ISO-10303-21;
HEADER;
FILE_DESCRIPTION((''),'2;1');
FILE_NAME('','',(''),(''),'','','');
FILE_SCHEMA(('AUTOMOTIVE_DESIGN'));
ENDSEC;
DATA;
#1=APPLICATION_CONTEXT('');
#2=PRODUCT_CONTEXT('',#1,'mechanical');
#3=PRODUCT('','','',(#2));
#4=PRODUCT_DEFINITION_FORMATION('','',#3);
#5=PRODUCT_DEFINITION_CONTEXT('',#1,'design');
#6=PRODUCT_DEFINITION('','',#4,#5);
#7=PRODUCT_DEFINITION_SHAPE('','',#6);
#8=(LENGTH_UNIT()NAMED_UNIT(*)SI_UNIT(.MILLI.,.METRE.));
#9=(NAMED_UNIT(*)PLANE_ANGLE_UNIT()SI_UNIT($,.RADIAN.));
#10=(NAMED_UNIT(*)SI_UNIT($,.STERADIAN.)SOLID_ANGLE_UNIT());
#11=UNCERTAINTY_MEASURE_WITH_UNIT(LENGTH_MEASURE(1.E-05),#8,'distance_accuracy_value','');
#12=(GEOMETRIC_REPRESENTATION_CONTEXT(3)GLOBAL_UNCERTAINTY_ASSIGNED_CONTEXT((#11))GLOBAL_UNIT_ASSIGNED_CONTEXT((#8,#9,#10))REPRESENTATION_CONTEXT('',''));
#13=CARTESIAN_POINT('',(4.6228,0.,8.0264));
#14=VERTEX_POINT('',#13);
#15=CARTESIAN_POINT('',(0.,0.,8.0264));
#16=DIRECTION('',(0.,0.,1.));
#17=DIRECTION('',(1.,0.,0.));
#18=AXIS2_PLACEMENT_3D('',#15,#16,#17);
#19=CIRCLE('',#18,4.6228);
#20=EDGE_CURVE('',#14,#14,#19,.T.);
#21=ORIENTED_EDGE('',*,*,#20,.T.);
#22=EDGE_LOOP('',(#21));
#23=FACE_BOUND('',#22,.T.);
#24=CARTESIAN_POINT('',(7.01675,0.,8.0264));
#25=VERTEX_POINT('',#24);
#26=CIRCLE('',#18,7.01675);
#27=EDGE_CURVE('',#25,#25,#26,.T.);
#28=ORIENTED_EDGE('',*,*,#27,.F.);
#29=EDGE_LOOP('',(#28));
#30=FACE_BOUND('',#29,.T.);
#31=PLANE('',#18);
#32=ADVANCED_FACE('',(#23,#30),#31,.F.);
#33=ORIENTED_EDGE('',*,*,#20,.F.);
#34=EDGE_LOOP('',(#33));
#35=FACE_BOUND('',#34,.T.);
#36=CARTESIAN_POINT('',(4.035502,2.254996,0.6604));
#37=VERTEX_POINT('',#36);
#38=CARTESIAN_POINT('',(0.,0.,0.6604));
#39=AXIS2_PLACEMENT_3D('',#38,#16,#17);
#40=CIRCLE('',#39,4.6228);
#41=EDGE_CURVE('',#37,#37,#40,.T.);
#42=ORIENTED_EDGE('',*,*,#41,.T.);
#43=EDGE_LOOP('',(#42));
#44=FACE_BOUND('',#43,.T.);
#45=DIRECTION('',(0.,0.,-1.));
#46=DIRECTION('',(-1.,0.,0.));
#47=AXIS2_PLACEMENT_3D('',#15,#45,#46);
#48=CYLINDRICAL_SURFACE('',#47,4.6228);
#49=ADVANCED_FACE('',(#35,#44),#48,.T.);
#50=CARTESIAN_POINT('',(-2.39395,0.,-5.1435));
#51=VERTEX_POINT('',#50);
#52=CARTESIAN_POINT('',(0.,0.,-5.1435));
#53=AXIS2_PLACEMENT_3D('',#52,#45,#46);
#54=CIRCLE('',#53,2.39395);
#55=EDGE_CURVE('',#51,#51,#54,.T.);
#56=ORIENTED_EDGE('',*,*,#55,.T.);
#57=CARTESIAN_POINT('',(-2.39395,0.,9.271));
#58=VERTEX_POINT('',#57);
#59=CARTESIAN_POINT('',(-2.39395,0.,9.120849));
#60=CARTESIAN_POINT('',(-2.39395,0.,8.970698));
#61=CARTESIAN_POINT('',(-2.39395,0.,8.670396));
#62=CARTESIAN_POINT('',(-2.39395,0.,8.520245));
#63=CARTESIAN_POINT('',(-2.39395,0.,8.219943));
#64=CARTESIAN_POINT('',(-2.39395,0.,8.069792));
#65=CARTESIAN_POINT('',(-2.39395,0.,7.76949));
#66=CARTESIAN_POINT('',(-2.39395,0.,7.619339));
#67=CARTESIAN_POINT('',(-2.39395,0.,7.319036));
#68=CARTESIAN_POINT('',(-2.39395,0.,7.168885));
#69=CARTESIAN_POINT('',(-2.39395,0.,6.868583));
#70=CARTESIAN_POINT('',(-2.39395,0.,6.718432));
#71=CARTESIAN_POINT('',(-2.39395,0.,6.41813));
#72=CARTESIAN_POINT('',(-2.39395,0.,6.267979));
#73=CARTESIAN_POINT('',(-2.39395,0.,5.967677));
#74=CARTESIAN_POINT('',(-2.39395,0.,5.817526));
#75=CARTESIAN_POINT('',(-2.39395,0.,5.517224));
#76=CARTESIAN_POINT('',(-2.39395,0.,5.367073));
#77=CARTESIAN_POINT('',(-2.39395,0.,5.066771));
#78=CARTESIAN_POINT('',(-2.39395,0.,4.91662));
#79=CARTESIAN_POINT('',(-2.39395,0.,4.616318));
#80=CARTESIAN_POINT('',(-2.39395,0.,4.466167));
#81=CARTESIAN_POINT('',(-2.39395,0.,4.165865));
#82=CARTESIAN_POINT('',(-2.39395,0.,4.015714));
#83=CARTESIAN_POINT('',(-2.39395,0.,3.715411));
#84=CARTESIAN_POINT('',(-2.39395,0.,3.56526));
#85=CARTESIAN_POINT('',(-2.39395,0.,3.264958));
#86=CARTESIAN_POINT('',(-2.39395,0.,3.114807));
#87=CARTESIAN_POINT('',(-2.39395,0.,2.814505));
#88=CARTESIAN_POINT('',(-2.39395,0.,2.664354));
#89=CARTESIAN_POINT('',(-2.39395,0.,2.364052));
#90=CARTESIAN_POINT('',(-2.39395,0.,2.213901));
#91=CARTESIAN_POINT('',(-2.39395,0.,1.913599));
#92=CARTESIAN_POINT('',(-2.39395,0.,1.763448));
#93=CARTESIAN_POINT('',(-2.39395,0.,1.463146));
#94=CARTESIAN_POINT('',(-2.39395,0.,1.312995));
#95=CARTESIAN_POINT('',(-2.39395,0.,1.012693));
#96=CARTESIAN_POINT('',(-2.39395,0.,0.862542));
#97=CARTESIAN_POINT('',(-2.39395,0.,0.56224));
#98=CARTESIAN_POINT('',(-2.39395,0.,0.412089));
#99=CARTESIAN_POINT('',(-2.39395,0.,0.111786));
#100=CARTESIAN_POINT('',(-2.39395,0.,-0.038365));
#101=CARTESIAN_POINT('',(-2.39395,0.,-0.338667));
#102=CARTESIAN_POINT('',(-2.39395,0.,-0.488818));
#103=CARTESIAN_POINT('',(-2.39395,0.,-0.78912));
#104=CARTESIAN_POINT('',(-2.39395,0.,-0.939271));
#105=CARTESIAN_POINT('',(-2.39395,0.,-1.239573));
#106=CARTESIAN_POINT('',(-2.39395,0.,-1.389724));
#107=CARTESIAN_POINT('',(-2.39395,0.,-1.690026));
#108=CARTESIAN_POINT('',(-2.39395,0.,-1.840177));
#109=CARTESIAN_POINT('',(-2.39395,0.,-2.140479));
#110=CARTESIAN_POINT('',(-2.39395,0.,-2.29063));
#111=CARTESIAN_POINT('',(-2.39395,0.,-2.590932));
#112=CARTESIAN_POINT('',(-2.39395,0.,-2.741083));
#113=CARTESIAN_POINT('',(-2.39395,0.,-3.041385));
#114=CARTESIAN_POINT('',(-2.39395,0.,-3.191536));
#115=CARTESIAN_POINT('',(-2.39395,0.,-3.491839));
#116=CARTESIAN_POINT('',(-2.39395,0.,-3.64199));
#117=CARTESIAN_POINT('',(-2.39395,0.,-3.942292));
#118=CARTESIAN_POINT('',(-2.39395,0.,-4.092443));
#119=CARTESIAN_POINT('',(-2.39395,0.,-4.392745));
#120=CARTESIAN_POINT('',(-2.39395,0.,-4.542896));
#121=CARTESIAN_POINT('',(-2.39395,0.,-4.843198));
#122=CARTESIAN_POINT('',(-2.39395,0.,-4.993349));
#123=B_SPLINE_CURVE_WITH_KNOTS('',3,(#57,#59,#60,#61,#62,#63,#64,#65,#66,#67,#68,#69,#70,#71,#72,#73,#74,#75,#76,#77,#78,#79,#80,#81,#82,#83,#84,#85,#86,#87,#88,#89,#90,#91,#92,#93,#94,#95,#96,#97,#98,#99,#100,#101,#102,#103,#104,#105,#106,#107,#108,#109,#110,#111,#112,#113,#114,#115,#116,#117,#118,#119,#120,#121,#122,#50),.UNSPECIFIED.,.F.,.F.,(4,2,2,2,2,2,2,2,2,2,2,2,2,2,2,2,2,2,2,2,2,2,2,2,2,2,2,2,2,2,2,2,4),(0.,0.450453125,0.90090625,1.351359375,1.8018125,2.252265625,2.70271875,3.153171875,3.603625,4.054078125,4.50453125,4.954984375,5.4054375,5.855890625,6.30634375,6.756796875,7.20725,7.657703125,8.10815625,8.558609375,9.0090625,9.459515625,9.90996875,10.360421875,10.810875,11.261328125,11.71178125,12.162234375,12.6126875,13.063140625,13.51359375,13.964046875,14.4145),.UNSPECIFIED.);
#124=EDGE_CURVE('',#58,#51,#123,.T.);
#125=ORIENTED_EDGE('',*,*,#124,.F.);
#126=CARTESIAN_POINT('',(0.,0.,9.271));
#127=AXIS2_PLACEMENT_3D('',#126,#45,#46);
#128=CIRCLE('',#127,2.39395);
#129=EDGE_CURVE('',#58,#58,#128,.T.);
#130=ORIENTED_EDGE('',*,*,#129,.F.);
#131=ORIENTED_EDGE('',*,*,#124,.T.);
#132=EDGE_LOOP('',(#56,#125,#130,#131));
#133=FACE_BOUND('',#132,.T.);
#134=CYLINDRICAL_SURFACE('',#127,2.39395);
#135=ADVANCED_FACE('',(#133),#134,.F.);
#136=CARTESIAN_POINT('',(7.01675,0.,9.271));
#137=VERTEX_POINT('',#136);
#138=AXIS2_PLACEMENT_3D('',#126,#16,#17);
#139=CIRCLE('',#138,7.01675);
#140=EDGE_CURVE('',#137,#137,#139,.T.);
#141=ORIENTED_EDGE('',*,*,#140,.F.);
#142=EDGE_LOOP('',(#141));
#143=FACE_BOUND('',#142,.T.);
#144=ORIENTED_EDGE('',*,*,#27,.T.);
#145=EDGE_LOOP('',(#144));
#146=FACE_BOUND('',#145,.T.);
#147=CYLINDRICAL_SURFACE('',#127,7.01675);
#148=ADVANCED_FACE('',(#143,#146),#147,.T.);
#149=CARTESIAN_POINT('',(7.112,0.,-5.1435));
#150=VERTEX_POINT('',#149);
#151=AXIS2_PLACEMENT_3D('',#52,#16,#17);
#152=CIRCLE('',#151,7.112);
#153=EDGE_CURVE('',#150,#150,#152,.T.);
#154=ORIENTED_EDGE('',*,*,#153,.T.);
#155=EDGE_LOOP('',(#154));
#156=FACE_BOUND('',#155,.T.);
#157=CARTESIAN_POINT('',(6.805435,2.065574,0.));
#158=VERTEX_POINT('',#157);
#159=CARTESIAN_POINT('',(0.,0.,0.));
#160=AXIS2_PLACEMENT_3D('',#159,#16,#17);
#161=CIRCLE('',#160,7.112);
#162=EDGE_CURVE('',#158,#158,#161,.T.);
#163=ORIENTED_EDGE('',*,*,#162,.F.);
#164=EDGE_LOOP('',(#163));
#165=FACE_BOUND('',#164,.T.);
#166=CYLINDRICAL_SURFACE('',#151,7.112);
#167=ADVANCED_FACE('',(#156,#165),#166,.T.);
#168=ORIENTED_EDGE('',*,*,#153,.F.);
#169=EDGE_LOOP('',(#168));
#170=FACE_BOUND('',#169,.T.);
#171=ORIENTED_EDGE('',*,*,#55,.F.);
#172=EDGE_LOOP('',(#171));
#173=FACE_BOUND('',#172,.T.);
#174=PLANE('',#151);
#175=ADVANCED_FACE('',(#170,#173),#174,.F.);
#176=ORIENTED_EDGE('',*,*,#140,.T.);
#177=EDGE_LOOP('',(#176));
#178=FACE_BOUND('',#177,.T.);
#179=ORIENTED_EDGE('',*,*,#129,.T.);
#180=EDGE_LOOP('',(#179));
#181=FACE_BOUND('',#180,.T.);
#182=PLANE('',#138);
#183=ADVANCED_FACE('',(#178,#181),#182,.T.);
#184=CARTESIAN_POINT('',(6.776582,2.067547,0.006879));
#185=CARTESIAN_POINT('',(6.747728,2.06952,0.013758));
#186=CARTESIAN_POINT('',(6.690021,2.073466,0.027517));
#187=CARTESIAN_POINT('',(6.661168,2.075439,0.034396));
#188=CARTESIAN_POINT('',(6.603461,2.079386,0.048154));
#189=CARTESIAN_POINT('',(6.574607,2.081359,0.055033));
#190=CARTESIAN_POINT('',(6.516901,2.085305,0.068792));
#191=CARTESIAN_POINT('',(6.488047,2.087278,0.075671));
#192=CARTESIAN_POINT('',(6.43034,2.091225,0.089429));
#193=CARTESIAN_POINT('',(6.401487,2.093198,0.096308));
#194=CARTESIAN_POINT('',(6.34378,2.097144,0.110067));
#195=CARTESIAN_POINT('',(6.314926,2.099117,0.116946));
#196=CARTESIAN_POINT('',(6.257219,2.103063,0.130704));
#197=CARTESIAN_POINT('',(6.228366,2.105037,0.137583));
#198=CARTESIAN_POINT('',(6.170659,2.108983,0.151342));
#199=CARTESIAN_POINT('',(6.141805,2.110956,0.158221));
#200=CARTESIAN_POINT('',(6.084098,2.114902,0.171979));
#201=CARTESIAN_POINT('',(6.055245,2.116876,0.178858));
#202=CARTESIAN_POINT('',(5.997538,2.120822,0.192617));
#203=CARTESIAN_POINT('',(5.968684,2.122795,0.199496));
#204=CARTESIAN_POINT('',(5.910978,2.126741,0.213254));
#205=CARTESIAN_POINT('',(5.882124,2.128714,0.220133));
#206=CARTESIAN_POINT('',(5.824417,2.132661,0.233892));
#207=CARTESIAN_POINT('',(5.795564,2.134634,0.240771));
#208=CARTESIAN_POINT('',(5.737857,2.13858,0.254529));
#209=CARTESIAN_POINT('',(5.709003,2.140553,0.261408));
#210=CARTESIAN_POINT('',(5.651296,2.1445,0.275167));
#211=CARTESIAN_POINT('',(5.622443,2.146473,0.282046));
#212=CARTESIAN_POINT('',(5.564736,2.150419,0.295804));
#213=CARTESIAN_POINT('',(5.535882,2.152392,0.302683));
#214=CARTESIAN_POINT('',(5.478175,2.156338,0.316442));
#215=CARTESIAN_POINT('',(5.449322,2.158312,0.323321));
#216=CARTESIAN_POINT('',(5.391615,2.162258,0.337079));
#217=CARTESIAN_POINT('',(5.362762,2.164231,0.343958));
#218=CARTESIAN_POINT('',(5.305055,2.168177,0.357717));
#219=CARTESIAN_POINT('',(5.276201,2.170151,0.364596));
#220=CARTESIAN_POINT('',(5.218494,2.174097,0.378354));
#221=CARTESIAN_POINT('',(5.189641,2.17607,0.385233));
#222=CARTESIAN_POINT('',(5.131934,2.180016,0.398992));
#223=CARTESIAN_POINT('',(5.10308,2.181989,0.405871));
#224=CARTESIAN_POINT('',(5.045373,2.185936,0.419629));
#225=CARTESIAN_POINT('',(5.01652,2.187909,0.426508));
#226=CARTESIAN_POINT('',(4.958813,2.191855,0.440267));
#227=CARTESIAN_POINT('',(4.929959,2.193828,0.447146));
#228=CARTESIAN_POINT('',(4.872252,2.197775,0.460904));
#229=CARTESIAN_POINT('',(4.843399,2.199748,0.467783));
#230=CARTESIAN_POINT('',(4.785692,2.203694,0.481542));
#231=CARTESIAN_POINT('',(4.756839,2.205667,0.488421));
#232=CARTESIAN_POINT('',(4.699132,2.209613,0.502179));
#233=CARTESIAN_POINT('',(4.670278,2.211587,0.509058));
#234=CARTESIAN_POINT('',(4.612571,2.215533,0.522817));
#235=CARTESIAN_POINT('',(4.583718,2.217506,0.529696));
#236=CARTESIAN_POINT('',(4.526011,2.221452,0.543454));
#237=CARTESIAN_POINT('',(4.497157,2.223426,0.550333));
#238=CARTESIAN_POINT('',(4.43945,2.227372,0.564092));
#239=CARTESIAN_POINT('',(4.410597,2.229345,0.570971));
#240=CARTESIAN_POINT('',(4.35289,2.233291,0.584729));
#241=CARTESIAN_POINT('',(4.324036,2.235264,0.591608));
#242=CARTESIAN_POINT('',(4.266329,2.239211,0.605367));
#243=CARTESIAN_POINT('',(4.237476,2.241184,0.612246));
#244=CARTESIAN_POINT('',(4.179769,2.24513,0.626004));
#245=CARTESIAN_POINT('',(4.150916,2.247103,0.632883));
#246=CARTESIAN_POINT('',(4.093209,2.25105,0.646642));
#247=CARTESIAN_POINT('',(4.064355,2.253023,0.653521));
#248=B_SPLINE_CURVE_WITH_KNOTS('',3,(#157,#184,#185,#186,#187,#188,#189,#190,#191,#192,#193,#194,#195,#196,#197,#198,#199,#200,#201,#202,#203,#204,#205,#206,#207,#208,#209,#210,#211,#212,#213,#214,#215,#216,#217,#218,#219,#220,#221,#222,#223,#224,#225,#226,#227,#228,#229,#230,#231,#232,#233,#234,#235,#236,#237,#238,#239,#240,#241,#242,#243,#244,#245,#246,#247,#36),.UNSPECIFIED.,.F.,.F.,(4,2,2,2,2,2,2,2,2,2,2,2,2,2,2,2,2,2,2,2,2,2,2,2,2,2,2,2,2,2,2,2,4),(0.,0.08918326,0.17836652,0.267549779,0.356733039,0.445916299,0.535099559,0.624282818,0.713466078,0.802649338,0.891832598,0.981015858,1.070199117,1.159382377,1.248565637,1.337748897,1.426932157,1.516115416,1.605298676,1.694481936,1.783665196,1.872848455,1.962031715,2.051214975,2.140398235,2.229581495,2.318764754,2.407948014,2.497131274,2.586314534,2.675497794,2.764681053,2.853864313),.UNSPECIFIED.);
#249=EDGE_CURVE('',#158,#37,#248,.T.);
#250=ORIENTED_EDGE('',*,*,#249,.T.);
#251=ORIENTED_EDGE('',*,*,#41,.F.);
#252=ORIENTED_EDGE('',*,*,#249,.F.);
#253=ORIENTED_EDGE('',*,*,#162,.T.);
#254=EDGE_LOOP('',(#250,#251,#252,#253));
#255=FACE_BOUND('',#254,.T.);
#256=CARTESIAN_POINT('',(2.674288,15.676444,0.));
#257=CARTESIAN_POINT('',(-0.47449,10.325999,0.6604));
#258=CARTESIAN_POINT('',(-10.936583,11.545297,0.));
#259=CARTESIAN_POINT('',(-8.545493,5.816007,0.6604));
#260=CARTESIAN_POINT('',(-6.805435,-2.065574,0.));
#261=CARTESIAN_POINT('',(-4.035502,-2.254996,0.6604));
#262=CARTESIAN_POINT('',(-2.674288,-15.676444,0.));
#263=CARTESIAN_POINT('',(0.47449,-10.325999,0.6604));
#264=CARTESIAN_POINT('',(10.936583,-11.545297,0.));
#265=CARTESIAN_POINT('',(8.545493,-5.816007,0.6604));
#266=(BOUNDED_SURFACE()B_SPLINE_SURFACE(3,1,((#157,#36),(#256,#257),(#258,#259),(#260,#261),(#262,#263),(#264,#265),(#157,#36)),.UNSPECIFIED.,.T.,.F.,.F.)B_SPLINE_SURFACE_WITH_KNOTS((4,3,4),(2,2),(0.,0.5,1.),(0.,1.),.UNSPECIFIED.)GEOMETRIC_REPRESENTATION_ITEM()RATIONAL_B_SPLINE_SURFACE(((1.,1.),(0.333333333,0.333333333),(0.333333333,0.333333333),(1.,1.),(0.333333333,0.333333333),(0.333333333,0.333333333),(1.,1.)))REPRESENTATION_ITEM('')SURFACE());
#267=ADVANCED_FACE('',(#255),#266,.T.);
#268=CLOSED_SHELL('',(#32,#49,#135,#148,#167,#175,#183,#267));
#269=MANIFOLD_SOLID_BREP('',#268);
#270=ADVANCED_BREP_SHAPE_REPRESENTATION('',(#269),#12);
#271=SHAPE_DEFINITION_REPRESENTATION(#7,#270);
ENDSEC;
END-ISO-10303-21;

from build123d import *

# Parameters (mm, degrees)
SKETCH1_R           = 7.112
BOSS_EXTRUDE1_DEPTH = 5.1435
SKETCH2_2_R         = 4.6228
BOSS_EXTRUDE2_DEPTH = 7.366
SKETCH4_R           = 7.01675
BOSS_EXTRUDE3_DEPTH = 1.2446
SKETCH6_R           = 2.39395
CUT_EXTRUDE1_DEPTH  = 18.576657848


with BuildPart() as part:
    # Sketch1 → Boss-Extrude1 (new body)
    with BuildSketch(Plane.XY):
        Circle(SKETCH1_R)
    extrude(amount=-BOSS_EXTRUDE1_DEPTH)

    # Loft1: read off the stored shape, not the designer's step
    # Loft1: loft between two sections, ruled curve by curve
    loft1_from = [
        Edge.make_bspline([(6.805435292, 2.065573645, 0), (2.674288001, 15.67644423, 0), (-10.936582583, 11.545296939, 0), (-6.805435292, -2.065573645, 0), (-2.674288001, -15.67644423, 0), (10.936582583, -11.545296939, 0), (6.805435292, 2.065573645, 0)], [0, 0, 0, 0, 0.5, 0.5, 0.5, 1, 1, 1, 1], 3, [1, 0.333333333, 0.333333333, 1, 0.333333333, 0.333333333, 1]),
    ]
    loft1_to = [
        Edge.make_bspline([(4.035501617, 2.254995907, 0.6604), (-0.474490196, 10.325999141, 0.6604), (-8.54549343, 5.816007327, 0.6604), (-4.035501617, -2.254995907, 0.6604), (0.474490196, -10.325999141, 0.6604), (8.54549343, -5.816007327, 0.6604), (4.035501617, 2.254995907, 0.6604)], [0, 0, 0, 0, 0.5, 0.5, 0.5, 1, 1, 1, 1], 3, [1, 0.333333333, 0.333333333, 1, 0.333333333, 0.333333333, 1]),
    ]
    loft1 = Solid(Shell([*[Face.make_surface_from_curves(loft1_from[k], loft1_to[k]) for k in range(1)], Face(Wire(loft1_from)), Face(Wire(loft1_to))]))
    add(loft1)

    # Sketch2<2> → Boss-Extrude2 (add)
    with BuildSketch(Plane.XY.offset(0.6604)):
        with Locations(Location((0, 0, 0), (0, 0, 29.196))):
            Circle(SKETCH2_2_R)
    extrude(amount=BOSS_EXTRUDE2_DEPTH)

    # Sketch4 → Boss-Extrude3 (add)
    with BuildSketch(Plane.XY.offset(8.0264)):
        Circle(SKETCH4_R)
    extrude(amount=BOSS_EXTRUDE3_DEPTH)

    # Sketch6 → Cut-Extrude1 (cut, through all)
    with BuildSketch(Plane(origin=(0, 0, -5.1435), x_dir=(-1, 0, 0), z_dir=(0, 0, -1))):
        Circle(SKETCH6_R)
    extrude(amount=-CUT_EXTRUDE1_DEPTH, mode=Mode.SUBTRACT)


solid = part.part
